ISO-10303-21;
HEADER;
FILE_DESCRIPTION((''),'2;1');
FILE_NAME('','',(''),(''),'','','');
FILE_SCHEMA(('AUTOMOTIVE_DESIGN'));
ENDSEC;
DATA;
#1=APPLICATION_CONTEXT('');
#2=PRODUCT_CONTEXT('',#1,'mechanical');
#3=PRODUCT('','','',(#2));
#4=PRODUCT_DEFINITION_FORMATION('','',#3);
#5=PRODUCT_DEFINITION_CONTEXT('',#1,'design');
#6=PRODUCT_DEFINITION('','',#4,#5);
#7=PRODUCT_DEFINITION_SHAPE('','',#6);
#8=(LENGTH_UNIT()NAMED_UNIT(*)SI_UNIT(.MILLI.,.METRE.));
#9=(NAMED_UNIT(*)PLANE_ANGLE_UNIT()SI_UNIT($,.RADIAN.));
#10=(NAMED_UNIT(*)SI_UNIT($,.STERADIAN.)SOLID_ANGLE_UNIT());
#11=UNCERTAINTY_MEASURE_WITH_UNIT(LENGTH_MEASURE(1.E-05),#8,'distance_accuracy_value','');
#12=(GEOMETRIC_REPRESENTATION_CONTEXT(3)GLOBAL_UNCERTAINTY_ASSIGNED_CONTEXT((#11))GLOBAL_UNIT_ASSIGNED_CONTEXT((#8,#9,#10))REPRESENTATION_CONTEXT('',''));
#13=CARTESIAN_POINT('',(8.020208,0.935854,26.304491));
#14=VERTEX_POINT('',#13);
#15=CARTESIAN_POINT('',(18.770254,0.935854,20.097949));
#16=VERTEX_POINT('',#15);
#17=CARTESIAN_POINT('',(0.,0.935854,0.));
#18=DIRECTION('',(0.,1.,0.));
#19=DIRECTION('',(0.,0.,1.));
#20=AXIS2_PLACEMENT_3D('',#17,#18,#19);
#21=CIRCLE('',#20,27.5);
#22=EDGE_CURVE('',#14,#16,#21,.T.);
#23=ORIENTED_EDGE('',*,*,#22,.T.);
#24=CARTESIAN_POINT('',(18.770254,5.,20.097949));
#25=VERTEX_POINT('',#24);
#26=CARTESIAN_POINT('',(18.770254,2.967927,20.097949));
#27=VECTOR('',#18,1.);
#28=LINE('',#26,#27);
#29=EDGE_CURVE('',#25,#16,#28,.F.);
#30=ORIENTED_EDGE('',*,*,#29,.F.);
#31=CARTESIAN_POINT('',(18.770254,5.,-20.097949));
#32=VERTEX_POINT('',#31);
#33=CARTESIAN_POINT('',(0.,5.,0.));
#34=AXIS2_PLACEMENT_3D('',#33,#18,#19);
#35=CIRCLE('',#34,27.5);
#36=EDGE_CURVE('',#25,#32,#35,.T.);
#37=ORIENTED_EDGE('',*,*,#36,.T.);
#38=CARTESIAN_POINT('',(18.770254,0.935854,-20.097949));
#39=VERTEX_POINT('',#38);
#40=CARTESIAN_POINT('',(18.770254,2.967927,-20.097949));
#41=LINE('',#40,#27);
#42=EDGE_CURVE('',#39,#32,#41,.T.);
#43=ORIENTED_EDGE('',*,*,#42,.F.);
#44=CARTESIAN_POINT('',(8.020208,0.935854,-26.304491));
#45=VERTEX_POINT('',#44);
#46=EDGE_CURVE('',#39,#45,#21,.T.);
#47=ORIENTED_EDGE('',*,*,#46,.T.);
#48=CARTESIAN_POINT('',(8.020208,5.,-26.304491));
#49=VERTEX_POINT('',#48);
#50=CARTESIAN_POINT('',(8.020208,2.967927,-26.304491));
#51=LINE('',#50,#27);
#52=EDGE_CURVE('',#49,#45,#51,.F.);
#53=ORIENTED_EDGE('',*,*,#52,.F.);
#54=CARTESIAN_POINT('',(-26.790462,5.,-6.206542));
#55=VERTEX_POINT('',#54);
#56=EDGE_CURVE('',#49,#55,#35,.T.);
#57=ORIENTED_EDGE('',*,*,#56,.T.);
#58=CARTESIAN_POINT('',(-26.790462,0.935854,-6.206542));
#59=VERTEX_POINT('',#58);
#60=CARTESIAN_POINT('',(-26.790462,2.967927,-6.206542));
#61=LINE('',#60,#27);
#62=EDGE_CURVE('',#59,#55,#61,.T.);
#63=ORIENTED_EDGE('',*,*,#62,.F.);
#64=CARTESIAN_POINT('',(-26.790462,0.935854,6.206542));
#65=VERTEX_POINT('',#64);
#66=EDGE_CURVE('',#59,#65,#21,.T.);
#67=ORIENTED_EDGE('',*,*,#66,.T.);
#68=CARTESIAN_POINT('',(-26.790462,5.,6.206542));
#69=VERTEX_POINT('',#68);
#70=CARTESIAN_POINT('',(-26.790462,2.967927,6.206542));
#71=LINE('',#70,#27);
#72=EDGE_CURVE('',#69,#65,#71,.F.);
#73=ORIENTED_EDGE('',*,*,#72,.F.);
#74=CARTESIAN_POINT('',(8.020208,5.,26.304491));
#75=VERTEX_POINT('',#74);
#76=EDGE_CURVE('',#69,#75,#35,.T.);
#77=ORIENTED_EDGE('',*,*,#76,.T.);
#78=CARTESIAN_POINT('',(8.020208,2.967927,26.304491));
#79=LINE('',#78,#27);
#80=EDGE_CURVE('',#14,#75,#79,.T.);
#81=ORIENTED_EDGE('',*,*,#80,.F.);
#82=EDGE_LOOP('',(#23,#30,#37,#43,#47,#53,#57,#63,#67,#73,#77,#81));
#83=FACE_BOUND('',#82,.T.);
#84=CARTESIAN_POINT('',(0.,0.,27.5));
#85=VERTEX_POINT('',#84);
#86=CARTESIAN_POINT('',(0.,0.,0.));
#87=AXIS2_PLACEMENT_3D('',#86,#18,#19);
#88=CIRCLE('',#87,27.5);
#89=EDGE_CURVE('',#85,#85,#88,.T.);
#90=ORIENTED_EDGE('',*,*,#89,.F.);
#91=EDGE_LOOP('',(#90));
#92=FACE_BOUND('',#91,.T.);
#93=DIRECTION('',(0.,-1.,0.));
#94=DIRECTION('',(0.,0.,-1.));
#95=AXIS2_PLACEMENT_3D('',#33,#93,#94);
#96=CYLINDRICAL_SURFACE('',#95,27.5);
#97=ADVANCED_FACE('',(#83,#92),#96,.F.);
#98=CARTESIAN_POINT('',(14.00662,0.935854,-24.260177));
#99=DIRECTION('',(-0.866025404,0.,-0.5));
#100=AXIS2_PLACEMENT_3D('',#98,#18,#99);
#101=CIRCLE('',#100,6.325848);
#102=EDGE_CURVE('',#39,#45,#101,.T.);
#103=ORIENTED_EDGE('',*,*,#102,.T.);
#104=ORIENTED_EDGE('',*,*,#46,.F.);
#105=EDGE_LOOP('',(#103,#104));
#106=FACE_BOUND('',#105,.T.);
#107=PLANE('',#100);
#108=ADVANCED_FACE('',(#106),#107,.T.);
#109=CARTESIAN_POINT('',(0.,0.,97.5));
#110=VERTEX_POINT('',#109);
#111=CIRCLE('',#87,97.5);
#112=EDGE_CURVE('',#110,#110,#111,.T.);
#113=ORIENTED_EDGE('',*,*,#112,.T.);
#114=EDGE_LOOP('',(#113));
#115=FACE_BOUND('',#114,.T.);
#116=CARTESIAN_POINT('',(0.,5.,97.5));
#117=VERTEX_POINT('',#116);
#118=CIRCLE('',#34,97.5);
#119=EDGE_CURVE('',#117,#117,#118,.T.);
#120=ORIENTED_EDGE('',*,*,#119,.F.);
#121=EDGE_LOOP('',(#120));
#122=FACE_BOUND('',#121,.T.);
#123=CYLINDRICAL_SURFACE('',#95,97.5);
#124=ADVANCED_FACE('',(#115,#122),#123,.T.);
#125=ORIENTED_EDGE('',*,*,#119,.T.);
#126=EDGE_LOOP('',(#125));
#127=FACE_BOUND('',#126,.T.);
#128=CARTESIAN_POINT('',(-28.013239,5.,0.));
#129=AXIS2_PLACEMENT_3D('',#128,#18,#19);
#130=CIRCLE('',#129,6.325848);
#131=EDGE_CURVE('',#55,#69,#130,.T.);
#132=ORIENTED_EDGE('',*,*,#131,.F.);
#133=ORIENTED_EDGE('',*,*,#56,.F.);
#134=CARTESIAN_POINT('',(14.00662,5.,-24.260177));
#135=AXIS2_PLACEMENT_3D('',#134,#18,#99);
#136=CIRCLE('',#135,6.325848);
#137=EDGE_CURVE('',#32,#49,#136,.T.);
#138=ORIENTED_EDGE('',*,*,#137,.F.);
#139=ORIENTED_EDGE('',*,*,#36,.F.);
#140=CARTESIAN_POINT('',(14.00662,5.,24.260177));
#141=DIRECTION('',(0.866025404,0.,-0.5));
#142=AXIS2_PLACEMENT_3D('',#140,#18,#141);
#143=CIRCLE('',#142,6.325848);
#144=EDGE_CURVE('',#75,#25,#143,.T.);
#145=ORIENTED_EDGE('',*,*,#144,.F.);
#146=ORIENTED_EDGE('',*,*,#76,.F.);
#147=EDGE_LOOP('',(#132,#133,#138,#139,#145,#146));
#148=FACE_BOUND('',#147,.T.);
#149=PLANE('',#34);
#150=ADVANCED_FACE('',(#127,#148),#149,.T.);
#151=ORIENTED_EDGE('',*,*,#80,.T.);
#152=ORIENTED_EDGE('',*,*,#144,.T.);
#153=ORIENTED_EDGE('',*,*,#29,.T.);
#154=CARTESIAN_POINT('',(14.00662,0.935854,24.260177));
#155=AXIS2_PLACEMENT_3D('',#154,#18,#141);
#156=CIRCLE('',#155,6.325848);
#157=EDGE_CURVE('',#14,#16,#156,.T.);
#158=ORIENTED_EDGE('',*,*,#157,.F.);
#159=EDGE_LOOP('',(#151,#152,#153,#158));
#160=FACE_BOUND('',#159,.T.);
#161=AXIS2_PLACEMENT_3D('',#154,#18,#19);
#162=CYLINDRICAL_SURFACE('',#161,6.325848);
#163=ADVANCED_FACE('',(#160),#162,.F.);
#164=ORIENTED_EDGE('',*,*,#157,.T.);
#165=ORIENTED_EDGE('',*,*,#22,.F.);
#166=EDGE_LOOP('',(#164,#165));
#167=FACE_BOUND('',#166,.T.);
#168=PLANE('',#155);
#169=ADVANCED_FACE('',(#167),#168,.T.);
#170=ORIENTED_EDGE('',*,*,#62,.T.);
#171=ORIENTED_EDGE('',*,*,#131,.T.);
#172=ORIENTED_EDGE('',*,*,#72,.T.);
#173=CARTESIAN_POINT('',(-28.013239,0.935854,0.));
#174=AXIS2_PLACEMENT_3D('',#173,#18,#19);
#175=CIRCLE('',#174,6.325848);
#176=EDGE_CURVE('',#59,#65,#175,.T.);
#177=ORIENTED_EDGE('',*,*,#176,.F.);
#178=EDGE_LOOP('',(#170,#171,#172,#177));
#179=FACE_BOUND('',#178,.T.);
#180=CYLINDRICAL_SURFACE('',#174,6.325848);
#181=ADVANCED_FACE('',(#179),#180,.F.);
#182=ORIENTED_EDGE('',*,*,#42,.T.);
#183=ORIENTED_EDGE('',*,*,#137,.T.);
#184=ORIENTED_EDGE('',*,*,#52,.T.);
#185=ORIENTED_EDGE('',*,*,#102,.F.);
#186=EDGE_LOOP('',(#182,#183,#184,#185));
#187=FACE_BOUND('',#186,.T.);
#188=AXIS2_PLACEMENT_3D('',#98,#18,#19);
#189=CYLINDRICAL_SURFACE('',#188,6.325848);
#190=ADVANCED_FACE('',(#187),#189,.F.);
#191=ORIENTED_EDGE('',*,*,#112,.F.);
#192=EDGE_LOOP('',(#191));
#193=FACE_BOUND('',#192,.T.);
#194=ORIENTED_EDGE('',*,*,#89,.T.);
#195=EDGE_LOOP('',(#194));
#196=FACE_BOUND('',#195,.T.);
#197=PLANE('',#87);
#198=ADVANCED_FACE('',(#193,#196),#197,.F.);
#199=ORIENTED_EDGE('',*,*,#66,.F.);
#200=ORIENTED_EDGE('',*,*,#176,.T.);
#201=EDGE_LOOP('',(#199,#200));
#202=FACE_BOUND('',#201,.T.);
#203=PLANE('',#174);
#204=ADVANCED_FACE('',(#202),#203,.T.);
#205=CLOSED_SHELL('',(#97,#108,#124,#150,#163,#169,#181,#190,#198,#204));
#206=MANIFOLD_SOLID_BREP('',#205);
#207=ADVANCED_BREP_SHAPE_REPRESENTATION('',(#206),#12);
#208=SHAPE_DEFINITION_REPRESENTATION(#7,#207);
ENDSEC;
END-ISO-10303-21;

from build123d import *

# Parameters (mm, degrees)
SKETCH1_R           = 97.5
BOSS_EXTRUDE1_DEPTH = 5
SKETCH2_R           = 27.5
CUT_EXTRUDE1_DEPTH  = 138.976447265
SKETCH3_R           = 6.325847544
CUT_EXTRUDE2_DEPTH  = 4.064145518
CIRPATTERN1_COUNT   = 3


with BuildPart() as part:
    # Sketch1 → Boss-Extrude1 (new body)
    with BuildSketch(Plane(origin=(0, 0, 0), x_dir=(1, 0, 0), z_dir=(0, 1, 0))):
        Circle(SKETCH1_R)
    extrude(amount=BOSS_EXTRUDE1_DEPTH)

    # Sketch2 → Cut-Extrude1 (cut, through all)
    with BuildSketch(Plane(origin=(0, 0, 0), x_dir=(1, 0, 0), z_dir=(0, 1, 0))):
        Circle(SKETCH2_R)
    extrude(amount=CUT_EXTRUDE1_DEPTH, mode=Mode.SUBTRACT)

    # Sketch3 → Cut-Extrude2 (cut)
    with BuildSketch(Plane(origin=(0, 5, 0), x_dir=(1, 0, 0), z_dir=(0, 1, 0))):
        with Locations((-28.013239074, 0)):
            Circle(SKETCH3_R)
    cut_extrude2 = extrude(amount=-CUT_EXTRUDE2_DEPTH, mode=Mode.SUBTRACT)

    # CirPattern1: Cut-Extrude2 ×3 about axis
    cirpattern1_axis = Axis((0, 0, 0), (0, 1, 0))
    for i in range(1, CIRPATTERN1_COUNT):
        add(cut_extrude2.rotate(cirpattern1_axis, i * 360 / CIRPATTERN1_COUNT), mode=Mode.SUBTRACT)


solid = part.part
